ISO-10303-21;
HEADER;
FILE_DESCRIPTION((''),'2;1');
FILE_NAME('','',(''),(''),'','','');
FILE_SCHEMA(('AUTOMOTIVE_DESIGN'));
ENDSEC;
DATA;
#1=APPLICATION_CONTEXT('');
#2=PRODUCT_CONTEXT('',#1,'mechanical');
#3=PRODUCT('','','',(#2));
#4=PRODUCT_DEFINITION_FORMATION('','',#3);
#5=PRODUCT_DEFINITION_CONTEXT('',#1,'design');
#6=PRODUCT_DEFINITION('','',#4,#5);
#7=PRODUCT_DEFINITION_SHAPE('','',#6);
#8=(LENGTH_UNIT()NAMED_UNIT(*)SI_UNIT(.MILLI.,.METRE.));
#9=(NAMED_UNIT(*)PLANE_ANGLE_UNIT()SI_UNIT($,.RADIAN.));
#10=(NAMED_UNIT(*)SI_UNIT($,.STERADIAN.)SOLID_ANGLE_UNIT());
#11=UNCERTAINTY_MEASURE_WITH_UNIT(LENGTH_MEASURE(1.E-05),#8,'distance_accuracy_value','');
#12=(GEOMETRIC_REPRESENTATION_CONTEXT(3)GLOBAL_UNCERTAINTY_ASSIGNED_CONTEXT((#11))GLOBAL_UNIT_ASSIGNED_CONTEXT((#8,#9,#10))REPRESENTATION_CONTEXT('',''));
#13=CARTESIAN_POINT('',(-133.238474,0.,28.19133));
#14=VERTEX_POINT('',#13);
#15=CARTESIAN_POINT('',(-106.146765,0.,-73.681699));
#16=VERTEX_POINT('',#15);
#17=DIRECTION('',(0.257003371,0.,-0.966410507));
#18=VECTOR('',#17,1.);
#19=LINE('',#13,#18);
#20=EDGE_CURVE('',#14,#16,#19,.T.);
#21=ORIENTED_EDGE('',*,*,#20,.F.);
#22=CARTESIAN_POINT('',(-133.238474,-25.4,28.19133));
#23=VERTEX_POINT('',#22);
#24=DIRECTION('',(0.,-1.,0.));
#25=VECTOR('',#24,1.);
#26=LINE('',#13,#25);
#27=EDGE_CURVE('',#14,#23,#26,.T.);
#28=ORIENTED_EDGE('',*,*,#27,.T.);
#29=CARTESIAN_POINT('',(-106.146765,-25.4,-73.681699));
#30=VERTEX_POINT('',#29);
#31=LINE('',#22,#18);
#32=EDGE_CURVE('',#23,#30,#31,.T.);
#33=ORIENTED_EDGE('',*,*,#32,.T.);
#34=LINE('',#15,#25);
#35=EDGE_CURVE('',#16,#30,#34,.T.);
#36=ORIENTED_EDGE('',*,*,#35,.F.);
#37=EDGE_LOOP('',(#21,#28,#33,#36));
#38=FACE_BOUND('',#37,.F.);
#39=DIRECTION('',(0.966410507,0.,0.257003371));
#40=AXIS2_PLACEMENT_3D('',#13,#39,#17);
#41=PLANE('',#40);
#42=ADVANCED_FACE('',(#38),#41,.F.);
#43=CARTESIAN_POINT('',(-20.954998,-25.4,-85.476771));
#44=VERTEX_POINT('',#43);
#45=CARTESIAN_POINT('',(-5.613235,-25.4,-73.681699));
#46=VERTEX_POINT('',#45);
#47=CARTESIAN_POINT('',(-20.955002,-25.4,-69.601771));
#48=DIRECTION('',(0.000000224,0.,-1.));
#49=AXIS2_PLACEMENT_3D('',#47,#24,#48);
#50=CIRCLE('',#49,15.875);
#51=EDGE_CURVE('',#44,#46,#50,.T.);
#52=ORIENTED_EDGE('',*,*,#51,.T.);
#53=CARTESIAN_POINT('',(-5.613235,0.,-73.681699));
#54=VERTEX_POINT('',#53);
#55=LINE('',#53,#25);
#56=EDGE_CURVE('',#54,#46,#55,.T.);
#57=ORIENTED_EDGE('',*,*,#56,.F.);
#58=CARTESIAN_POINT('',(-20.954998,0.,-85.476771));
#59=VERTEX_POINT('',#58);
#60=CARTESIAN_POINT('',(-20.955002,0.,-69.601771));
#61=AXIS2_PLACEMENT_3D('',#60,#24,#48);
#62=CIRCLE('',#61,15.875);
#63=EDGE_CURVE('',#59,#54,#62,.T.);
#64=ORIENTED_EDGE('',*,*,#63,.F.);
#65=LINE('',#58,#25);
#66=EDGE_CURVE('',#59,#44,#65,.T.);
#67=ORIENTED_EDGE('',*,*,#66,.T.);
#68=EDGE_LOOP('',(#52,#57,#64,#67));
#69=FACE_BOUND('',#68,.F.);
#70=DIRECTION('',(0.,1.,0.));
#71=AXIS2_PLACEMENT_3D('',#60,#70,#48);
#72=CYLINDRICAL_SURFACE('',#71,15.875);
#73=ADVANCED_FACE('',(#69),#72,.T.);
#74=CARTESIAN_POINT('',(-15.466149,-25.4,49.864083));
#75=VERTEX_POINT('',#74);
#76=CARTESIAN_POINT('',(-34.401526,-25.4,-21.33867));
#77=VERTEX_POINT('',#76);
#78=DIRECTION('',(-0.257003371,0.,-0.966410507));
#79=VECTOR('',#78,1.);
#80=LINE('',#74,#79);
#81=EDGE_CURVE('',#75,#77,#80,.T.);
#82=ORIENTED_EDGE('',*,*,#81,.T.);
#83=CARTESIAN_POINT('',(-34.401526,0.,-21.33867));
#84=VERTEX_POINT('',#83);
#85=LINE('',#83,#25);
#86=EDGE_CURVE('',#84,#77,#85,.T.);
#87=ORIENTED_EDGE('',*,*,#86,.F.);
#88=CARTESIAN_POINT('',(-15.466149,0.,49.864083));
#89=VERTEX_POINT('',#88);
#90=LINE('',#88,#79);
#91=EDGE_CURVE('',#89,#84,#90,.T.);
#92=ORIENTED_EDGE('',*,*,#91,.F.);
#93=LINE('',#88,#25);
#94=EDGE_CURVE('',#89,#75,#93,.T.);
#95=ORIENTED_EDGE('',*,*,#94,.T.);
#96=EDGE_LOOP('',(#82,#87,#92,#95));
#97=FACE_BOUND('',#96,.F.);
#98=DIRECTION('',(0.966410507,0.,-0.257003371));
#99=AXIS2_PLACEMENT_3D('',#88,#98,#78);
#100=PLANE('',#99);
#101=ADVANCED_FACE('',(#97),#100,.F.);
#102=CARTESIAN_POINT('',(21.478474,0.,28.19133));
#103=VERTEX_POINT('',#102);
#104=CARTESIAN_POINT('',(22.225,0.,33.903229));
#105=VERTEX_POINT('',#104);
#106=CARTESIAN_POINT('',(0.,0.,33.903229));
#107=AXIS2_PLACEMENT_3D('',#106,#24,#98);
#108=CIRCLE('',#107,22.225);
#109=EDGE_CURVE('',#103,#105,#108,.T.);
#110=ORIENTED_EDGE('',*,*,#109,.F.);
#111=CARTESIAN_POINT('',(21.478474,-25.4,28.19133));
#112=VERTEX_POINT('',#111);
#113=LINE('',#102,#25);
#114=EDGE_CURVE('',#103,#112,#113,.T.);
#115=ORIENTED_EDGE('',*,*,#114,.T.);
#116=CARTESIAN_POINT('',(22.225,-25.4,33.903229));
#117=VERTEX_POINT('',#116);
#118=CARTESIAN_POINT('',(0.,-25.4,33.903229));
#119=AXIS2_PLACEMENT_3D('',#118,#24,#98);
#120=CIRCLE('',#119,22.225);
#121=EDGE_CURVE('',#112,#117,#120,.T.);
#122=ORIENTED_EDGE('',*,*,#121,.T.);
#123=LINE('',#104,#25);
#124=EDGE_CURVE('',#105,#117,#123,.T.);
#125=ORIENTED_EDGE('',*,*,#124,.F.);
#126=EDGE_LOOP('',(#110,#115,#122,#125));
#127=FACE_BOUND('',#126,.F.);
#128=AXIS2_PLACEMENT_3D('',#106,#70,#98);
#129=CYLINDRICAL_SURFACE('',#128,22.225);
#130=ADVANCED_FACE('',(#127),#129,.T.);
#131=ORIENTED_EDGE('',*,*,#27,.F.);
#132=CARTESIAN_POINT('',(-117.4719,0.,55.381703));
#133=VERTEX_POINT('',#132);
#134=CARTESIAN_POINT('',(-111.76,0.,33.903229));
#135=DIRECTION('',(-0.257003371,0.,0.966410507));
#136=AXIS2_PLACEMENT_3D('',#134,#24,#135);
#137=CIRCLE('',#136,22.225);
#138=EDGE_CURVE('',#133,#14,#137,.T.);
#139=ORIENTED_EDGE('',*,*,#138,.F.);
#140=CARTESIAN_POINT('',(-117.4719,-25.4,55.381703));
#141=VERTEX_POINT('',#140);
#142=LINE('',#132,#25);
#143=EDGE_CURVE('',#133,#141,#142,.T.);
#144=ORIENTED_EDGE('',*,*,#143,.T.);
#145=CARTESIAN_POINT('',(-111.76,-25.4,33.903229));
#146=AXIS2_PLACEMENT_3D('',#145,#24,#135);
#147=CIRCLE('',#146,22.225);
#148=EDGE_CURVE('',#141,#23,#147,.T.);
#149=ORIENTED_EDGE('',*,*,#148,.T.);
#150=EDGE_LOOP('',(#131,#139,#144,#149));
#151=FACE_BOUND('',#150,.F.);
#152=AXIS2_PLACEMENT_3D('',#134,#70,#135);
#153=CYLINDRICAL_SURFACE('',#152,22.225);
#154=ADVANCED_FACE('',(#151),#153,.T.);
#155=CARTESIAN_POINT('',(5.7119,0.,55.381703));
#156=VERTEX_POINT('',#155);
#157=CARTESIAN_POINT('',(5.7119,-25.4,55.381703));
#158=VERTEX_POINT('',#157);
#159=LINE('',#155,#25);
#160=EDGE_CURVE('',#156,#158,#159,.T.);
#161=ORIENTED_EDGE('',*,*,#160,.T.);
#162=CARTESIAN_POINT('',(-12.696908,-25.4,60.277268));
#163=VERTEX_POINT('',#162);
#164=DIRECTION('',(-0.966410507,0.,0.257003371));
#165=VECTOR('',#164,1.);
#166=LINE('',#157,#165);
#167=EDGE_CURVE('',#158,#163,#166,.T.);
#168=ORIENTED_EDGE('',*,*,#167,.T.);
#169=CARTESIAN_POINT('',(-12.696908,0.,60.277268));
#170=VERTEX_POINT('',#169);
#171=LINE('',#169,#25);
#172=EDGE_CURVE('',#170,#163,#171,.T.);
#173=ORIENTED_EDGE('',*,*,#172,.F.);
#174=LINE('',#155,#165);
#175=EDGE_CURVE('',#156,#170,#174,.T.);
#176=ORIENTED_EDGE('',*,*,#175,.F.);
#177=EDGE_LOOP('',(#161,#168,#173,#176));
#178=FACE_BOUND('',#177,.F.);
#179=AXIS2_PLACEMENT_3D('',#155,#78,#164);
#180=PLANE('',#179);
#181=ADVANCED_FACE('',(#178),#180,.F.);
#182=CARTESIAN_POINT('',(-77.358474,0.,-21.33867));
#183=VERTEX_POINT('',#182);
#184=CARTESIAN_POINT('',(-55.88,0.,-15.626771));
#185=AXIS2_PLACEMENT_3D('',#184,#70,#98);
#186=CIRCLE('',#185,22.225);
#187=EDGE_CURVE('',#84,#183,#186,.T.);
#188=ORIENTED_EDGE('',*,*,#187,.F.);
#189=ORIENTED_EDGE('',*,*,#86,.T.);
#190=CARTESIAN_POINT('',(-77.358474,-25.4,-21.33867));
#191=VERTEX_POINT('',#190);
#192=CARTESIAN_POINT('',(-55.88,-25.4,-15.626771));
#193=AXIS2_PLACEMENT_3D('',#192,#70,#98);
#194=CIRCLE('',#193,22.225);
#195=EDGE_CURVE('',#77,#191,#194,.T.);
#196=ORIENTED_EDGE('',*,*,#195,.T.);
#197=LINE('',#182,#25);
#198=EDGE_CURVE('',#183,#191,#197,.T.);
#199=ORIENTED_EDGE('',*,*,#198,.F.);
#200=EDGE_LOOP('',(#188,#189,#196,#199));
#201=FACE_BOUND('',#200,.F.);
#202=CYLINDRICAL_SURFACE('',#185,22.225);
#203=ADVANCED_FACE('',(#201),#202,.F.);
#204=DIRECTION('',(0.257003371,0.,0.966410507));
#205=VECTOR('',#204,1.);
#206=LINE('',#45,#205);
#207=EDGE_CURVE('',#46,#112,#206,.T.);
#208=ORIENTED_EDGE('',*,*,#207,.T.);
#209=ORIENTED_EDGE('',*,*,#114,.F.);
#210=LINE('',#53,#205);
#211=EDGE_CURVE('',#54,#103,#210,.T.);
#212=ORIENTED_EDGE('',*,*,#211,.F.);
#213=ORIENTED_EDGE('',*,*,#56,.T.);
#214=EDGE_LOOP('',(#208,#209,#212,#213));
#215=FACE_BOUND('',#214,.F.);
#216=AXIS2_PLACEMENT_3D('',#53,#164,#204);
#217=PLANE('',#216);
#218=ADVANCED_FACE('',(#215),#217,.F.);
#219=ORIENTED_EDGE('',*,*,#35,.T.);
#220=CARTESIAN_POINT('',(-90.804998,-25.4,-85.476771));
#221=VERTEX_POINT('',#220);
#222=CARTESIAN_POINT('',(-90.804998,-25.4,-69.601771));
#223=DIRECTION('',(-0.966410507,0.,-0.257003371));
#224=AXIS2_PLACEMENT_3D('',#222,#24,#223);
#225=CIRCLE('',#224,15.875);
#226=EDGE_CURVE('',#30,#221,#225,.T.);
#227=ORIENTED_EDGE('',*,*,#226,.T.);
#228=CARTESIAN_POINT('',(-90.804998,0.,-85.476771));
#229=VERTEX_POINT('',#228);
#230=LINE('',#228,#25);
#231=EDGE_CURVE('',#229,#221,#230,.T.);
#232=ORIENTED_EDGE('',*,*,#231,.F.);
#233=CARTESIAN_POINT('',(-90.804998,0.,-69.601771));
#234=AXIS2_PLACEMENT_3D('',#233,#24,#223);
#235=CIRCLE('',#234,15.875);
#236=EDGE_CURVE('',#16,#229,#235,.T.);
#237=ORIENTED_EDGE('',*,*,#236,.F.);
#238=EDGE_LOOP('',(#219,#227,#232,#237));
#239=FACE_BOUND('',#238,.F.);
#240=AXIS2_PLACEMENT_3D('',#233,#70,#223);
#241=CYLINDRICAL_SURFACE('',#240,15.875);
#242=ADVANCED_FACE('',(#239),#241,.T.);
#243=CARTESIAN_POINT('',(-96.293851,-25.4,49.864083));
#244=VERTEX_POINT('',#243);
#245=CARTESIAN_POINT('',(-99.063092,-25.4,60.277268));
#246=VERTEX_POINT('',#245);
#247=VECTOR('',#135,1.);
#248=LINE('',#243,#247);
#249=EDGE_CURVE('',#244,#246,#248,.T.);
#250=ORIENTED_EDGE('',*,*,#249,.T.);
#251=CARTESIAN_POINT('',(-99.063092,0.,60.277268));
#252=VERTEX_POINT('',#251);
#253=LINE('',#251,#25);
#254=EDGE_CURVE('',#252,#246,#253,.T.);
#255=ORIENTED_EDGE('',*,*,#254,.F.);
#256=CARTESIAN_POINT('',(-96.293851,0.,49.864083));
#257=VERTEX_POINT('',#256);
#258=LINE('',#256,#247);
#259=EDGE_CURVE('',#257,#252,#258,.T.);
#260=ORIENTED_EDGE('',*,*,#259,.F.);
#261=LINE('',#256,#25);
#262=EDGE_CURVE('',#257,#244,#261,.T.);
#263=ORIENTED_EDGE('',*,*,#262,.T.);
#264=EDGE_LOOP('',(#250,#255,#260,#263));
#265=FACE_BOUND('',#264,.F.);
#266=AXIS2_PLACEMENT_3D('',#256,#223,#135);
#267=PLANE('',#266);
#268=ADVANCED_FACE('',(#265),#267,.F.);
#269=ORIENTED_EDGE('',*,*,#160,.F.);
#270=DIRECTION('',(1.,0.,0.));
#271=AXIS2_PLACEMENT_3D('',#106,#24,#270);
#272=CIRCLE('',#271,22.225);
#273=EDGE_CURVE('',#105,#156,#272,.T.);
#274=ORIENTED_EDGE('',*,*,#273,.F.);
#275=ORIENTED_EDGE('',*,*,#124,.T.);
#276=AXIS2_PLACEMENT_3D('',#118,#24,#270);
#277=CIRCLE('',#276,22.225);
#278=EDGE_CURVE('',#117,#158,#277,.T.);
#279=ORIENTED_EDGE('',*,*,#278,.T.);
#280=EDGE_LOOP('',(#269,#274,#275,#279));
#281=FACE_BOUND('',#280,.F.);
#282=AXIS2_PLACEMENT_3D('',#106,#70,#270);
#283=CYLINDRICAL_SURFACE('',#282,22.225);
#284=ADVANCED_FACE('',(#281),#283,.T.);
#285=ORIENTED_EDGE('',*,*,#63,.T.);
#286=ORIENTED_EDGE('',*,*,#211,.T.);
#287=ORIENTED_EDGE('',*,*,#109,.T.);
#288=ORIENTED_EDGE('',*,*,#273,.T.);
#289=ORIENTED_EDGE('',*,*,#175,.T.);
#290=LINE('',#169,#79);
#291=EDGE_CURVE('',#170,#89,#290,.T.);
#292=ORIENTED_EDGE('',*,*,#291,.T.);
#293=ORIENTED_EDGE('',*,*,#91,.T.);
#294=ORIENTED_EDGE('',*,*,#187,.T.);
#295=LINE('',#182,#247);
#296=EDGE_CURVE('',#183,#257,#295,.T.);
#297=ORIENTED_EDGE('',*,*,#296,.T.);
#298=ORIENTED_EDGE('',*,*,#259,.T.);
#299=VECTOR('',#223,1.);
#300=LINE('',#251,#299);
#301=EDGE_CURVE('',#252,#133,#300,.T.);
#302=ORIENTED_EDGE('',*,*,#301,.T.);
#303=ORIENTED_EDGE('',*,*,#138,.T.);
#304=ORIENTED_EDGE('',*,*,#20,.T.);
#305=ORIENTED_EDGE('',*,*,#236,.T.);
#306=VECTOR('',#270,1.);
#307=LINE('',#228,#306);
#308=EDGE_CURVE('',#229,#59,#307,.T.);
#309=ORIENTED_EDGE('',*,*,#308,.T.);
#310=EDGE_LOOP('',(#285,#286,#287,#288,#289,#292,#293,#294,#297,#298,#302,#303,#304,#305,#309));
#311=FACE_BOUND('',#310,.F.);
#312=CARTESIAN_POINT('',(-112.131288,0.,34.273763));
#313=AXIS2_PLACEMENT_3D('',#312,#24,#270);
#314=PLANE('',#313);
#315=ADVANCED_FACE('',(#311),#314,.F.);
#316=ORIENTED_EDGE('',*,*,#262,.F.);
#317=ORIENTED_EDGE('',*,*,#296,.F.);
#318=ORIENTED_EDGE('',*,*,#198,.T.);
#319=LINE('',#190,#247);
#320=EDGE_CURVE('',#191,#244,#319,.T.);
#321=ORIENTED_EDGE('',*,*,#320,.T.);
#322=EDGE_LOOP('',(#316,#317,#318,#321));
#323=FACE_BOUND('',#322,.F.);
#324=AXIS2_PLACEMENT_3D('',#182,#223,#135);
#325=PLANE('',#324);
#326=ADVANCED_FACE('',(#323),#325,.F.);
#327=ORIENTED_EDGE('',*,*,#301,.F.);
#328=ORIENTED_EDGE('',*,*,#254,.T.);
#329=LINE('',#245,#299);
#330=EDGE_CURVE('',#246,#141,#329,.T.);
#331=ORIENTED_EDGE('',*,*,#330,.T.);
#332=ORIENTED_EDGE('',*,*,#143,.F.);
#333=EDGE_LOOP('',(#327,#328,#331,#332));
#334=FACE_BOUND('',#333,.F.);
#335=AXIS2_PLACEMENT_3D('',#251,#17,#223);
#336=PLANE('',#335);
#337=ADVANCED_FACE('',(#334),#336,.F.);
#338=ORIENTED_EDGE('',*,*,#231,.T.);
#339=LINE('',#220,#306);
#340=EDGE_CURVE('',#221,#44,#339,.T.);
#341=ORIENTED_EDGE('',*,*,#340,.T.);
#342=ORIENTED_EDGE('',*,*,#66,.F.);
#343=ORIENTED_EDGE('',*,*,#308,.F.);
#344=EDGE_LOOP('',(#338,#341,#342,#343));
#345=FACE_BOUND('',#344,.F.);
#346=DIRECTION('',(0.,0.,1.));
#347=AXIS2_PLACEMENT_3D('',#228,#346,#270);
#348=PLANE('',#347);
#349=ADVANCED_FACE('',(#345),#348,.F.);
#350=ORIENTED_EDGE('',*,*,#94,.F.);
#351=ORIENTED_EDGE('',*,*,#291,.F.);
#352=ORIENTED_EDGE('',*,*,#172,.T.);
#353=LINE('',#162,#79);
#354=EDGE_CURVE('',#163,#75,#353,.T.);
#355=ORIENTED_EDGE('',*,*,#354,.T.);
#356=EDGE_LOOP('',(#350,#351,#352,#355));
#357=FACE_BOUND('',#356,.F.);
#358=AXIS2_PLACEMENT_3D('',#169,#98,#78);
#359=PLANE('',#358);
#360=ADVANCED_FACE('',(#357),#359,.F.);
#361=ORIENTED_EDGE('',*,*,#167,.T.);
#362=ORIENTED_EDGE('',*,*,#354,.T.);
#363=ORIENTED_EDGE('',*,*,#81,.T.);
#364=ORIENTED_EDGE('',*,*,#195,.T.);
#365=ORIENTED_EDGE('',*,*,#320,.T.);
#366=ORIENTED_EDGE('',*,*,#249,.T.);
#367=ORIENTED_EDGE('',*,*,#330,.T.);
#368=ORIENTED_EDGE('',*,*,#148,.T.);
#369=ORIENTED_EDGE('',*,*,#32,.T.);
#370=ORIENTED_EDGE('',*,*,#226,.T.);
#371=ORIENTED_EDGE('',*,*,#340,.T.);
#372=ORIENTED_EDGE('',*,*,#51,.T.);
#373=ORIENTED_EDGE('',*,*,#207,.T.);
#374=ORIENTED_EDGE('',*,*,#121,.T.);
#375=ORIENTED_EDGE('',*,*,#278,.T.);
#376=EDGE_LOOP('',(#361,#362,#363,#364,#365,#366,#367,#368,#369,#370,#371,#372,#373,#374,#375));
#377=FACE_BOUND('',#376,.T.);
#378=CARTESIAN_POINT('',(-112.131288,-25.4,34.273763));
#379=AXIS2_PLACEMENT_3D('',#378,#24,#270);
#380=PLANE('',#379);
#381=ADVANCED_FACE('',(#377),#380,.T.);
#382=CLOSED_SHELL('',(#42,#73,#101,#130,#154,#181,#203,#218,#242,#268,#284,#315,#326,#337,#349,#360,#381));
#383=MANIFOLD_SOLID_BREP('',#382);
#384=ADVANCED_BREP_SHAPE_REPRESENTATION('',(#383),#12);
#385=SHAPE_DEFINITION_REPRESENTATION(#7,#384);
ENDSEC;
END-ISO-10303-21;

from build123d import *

# Parameters (mm, degrees)
F1_DEPTH = 25.4


with BuildPart() as f1:
    # F0 (on Front) → F1 (new body)
    with BuildSketch(Plane.XZ):
        with BuildLine():
            ThreePointArc((-96.2938510095, 49.8640834202), (-106.1566639379, 55.4102805892), (-117.4718999148, 55.3817029315))
            ThreePointArc((-117.4718999148, 55.3817029315), (-130.9864974324, 45.0518805264), (-133.238473511, 28.1913295056))
            ThreePointArc((-133.238473511, 28.1913295056), (-111.9975569081, 11.6794990469), (-90.4085331471, 27.7335059074))
            Line((-90.4085331471, 27.7335059074), (-96.2938510095, 49.8640834202))
        make_face()
        with BuildLine():
            Line((-99.0630919931, 60.2772681748), (-117.4718999148, 55.3817029315))
            ThreePointArc((-117.4718999148, 55.3817029315), (-106.1566639379, 55.4102805892), (-96.2938510095, 49.8640834202))
            Line((-96.2938510095, 49.8640834202), (-99.0630919931, 60.2772681748))
        make_face()
        with BuildLine():
            ThreePointArc((-90.4085331471, 27.7335059074), (-111.9975569081, 11.6794990469), (-133.238473511, 28.1913295056))
            Line((-133.238473511, 28.1913295056), (-106.1467650121, -73.6816990901))
            ThreePointArc((-106.1467650121, -73.6816990901), (-92.8623116551, -53.860643351), (-74.9299982186, -69.6017705795))
            ThreePointArc((-74.9299982186, -69.6017705795), (-79.5796780672, -80.8270907309), (-90.8049982186, -85.4767705795))
            Line((-90.8049982186, -85.4767705795), (-20.9549982186, -85.4767705795))
            ThreePointArc((-20.9549982186, -85.4767705795), (-32.1803231924, -58.3764516879), (-5.0800017814, -69.6017705795))
            ThreePointArc((-5.0800017814, -69.6017705795), (-5.2138745529, -71.659084016), (-5.6132349879, -73.6816990901))
            Line((-5.6132349879, -73.6816990901), (21.478473511, 28.1913295056))
            ThreePointArc((21.478473511, 28.1913295056), (0.2375569081, 11.6794990469), (-21.3514668529, 27.7335059074))
            Line((-21.3514668529, 27.7335059074), (-34.401526489, -21.3386704944))
            ThreePointArc((-34.401526489, -21.3386704944), (-55.88, -37.8517705795), (-77.358473511, -21.3386704944))
            Line((-77.358473511, -21.3386704944), (-90.4085331471, 27.7335059074))
        make_face()
        with BuildLine():
            ThreePointArc((-74.9299982186, -69.6017705795), (-92.8623116551, -53.860643351), (-106.1467650121, -73.6816990901))
            ThreePointArc((-106.1467650121, -73.6816990901), (-100.4809157434, -82.1871686683), (-90.8049982186, -85.4767705795))
            ThreePointArc((-90.8049982186, -85.4767705795), (-79.5796780672, -80.8270907309), (-74.9299982186, -69.6017705795))
        make_face()
        with BuildLine():
            ThreePointArc((-5.0800017814, -69.6017705795), (-32.1803231924, -58.3764516879), (-20.9549982186, -85.4767705795))
            ThreePointArc((-20.9549982186, -85.4767705795), (-11.2790828443, -82.1871675825), (-5.6132349879, -73.6816990901))
            ThreePointArc((-5.6132349879, -73.6816990901), (-5.2138745529, -71.659084016), (-5.0800017814, -69.6017705795))
        make_face()
        with BuildLine():
            Line((-15.4661489905, 49.8640834202), (-21.3514668529, 27.7335059074))
            ThreePointArc((-21.3514668529, 27.7335059074), (0.2375569081, 11.6794990469), (21.478473511, 28.1913295056))
            ThreePointArc((21.478473511, 28.1913295056), (22.0375781199, 31.0229906094), (22.225, 33.9032294205))
            ThreePointArc((22.225, 33.9032294205), (17.6195573243, 47.4495139552), (5.7118999148, 55.3817029315))
            ThreePointArc((5.7118999148, 55.3817029315), (-5.6033360621, 55.4102805892), (-15.4661489905, 49.8640834202))
        make_face()
        with BuildLine():
            Line((-12.6969080069, 60.2772681748), (-15.4661489905, 49.8640834202))
            ThreePointArc((-15.4661489905, 49.8640834202), (-5.6033360621, 55.4102805892), (5.7118999148, 55.3817029315))
            Line((5.7118999148, 55.3817029315), (-12.6969080069, 60.2772681748))
        make_face()
    extrude(amount=F1_DEPTH)


solid = f1.part
